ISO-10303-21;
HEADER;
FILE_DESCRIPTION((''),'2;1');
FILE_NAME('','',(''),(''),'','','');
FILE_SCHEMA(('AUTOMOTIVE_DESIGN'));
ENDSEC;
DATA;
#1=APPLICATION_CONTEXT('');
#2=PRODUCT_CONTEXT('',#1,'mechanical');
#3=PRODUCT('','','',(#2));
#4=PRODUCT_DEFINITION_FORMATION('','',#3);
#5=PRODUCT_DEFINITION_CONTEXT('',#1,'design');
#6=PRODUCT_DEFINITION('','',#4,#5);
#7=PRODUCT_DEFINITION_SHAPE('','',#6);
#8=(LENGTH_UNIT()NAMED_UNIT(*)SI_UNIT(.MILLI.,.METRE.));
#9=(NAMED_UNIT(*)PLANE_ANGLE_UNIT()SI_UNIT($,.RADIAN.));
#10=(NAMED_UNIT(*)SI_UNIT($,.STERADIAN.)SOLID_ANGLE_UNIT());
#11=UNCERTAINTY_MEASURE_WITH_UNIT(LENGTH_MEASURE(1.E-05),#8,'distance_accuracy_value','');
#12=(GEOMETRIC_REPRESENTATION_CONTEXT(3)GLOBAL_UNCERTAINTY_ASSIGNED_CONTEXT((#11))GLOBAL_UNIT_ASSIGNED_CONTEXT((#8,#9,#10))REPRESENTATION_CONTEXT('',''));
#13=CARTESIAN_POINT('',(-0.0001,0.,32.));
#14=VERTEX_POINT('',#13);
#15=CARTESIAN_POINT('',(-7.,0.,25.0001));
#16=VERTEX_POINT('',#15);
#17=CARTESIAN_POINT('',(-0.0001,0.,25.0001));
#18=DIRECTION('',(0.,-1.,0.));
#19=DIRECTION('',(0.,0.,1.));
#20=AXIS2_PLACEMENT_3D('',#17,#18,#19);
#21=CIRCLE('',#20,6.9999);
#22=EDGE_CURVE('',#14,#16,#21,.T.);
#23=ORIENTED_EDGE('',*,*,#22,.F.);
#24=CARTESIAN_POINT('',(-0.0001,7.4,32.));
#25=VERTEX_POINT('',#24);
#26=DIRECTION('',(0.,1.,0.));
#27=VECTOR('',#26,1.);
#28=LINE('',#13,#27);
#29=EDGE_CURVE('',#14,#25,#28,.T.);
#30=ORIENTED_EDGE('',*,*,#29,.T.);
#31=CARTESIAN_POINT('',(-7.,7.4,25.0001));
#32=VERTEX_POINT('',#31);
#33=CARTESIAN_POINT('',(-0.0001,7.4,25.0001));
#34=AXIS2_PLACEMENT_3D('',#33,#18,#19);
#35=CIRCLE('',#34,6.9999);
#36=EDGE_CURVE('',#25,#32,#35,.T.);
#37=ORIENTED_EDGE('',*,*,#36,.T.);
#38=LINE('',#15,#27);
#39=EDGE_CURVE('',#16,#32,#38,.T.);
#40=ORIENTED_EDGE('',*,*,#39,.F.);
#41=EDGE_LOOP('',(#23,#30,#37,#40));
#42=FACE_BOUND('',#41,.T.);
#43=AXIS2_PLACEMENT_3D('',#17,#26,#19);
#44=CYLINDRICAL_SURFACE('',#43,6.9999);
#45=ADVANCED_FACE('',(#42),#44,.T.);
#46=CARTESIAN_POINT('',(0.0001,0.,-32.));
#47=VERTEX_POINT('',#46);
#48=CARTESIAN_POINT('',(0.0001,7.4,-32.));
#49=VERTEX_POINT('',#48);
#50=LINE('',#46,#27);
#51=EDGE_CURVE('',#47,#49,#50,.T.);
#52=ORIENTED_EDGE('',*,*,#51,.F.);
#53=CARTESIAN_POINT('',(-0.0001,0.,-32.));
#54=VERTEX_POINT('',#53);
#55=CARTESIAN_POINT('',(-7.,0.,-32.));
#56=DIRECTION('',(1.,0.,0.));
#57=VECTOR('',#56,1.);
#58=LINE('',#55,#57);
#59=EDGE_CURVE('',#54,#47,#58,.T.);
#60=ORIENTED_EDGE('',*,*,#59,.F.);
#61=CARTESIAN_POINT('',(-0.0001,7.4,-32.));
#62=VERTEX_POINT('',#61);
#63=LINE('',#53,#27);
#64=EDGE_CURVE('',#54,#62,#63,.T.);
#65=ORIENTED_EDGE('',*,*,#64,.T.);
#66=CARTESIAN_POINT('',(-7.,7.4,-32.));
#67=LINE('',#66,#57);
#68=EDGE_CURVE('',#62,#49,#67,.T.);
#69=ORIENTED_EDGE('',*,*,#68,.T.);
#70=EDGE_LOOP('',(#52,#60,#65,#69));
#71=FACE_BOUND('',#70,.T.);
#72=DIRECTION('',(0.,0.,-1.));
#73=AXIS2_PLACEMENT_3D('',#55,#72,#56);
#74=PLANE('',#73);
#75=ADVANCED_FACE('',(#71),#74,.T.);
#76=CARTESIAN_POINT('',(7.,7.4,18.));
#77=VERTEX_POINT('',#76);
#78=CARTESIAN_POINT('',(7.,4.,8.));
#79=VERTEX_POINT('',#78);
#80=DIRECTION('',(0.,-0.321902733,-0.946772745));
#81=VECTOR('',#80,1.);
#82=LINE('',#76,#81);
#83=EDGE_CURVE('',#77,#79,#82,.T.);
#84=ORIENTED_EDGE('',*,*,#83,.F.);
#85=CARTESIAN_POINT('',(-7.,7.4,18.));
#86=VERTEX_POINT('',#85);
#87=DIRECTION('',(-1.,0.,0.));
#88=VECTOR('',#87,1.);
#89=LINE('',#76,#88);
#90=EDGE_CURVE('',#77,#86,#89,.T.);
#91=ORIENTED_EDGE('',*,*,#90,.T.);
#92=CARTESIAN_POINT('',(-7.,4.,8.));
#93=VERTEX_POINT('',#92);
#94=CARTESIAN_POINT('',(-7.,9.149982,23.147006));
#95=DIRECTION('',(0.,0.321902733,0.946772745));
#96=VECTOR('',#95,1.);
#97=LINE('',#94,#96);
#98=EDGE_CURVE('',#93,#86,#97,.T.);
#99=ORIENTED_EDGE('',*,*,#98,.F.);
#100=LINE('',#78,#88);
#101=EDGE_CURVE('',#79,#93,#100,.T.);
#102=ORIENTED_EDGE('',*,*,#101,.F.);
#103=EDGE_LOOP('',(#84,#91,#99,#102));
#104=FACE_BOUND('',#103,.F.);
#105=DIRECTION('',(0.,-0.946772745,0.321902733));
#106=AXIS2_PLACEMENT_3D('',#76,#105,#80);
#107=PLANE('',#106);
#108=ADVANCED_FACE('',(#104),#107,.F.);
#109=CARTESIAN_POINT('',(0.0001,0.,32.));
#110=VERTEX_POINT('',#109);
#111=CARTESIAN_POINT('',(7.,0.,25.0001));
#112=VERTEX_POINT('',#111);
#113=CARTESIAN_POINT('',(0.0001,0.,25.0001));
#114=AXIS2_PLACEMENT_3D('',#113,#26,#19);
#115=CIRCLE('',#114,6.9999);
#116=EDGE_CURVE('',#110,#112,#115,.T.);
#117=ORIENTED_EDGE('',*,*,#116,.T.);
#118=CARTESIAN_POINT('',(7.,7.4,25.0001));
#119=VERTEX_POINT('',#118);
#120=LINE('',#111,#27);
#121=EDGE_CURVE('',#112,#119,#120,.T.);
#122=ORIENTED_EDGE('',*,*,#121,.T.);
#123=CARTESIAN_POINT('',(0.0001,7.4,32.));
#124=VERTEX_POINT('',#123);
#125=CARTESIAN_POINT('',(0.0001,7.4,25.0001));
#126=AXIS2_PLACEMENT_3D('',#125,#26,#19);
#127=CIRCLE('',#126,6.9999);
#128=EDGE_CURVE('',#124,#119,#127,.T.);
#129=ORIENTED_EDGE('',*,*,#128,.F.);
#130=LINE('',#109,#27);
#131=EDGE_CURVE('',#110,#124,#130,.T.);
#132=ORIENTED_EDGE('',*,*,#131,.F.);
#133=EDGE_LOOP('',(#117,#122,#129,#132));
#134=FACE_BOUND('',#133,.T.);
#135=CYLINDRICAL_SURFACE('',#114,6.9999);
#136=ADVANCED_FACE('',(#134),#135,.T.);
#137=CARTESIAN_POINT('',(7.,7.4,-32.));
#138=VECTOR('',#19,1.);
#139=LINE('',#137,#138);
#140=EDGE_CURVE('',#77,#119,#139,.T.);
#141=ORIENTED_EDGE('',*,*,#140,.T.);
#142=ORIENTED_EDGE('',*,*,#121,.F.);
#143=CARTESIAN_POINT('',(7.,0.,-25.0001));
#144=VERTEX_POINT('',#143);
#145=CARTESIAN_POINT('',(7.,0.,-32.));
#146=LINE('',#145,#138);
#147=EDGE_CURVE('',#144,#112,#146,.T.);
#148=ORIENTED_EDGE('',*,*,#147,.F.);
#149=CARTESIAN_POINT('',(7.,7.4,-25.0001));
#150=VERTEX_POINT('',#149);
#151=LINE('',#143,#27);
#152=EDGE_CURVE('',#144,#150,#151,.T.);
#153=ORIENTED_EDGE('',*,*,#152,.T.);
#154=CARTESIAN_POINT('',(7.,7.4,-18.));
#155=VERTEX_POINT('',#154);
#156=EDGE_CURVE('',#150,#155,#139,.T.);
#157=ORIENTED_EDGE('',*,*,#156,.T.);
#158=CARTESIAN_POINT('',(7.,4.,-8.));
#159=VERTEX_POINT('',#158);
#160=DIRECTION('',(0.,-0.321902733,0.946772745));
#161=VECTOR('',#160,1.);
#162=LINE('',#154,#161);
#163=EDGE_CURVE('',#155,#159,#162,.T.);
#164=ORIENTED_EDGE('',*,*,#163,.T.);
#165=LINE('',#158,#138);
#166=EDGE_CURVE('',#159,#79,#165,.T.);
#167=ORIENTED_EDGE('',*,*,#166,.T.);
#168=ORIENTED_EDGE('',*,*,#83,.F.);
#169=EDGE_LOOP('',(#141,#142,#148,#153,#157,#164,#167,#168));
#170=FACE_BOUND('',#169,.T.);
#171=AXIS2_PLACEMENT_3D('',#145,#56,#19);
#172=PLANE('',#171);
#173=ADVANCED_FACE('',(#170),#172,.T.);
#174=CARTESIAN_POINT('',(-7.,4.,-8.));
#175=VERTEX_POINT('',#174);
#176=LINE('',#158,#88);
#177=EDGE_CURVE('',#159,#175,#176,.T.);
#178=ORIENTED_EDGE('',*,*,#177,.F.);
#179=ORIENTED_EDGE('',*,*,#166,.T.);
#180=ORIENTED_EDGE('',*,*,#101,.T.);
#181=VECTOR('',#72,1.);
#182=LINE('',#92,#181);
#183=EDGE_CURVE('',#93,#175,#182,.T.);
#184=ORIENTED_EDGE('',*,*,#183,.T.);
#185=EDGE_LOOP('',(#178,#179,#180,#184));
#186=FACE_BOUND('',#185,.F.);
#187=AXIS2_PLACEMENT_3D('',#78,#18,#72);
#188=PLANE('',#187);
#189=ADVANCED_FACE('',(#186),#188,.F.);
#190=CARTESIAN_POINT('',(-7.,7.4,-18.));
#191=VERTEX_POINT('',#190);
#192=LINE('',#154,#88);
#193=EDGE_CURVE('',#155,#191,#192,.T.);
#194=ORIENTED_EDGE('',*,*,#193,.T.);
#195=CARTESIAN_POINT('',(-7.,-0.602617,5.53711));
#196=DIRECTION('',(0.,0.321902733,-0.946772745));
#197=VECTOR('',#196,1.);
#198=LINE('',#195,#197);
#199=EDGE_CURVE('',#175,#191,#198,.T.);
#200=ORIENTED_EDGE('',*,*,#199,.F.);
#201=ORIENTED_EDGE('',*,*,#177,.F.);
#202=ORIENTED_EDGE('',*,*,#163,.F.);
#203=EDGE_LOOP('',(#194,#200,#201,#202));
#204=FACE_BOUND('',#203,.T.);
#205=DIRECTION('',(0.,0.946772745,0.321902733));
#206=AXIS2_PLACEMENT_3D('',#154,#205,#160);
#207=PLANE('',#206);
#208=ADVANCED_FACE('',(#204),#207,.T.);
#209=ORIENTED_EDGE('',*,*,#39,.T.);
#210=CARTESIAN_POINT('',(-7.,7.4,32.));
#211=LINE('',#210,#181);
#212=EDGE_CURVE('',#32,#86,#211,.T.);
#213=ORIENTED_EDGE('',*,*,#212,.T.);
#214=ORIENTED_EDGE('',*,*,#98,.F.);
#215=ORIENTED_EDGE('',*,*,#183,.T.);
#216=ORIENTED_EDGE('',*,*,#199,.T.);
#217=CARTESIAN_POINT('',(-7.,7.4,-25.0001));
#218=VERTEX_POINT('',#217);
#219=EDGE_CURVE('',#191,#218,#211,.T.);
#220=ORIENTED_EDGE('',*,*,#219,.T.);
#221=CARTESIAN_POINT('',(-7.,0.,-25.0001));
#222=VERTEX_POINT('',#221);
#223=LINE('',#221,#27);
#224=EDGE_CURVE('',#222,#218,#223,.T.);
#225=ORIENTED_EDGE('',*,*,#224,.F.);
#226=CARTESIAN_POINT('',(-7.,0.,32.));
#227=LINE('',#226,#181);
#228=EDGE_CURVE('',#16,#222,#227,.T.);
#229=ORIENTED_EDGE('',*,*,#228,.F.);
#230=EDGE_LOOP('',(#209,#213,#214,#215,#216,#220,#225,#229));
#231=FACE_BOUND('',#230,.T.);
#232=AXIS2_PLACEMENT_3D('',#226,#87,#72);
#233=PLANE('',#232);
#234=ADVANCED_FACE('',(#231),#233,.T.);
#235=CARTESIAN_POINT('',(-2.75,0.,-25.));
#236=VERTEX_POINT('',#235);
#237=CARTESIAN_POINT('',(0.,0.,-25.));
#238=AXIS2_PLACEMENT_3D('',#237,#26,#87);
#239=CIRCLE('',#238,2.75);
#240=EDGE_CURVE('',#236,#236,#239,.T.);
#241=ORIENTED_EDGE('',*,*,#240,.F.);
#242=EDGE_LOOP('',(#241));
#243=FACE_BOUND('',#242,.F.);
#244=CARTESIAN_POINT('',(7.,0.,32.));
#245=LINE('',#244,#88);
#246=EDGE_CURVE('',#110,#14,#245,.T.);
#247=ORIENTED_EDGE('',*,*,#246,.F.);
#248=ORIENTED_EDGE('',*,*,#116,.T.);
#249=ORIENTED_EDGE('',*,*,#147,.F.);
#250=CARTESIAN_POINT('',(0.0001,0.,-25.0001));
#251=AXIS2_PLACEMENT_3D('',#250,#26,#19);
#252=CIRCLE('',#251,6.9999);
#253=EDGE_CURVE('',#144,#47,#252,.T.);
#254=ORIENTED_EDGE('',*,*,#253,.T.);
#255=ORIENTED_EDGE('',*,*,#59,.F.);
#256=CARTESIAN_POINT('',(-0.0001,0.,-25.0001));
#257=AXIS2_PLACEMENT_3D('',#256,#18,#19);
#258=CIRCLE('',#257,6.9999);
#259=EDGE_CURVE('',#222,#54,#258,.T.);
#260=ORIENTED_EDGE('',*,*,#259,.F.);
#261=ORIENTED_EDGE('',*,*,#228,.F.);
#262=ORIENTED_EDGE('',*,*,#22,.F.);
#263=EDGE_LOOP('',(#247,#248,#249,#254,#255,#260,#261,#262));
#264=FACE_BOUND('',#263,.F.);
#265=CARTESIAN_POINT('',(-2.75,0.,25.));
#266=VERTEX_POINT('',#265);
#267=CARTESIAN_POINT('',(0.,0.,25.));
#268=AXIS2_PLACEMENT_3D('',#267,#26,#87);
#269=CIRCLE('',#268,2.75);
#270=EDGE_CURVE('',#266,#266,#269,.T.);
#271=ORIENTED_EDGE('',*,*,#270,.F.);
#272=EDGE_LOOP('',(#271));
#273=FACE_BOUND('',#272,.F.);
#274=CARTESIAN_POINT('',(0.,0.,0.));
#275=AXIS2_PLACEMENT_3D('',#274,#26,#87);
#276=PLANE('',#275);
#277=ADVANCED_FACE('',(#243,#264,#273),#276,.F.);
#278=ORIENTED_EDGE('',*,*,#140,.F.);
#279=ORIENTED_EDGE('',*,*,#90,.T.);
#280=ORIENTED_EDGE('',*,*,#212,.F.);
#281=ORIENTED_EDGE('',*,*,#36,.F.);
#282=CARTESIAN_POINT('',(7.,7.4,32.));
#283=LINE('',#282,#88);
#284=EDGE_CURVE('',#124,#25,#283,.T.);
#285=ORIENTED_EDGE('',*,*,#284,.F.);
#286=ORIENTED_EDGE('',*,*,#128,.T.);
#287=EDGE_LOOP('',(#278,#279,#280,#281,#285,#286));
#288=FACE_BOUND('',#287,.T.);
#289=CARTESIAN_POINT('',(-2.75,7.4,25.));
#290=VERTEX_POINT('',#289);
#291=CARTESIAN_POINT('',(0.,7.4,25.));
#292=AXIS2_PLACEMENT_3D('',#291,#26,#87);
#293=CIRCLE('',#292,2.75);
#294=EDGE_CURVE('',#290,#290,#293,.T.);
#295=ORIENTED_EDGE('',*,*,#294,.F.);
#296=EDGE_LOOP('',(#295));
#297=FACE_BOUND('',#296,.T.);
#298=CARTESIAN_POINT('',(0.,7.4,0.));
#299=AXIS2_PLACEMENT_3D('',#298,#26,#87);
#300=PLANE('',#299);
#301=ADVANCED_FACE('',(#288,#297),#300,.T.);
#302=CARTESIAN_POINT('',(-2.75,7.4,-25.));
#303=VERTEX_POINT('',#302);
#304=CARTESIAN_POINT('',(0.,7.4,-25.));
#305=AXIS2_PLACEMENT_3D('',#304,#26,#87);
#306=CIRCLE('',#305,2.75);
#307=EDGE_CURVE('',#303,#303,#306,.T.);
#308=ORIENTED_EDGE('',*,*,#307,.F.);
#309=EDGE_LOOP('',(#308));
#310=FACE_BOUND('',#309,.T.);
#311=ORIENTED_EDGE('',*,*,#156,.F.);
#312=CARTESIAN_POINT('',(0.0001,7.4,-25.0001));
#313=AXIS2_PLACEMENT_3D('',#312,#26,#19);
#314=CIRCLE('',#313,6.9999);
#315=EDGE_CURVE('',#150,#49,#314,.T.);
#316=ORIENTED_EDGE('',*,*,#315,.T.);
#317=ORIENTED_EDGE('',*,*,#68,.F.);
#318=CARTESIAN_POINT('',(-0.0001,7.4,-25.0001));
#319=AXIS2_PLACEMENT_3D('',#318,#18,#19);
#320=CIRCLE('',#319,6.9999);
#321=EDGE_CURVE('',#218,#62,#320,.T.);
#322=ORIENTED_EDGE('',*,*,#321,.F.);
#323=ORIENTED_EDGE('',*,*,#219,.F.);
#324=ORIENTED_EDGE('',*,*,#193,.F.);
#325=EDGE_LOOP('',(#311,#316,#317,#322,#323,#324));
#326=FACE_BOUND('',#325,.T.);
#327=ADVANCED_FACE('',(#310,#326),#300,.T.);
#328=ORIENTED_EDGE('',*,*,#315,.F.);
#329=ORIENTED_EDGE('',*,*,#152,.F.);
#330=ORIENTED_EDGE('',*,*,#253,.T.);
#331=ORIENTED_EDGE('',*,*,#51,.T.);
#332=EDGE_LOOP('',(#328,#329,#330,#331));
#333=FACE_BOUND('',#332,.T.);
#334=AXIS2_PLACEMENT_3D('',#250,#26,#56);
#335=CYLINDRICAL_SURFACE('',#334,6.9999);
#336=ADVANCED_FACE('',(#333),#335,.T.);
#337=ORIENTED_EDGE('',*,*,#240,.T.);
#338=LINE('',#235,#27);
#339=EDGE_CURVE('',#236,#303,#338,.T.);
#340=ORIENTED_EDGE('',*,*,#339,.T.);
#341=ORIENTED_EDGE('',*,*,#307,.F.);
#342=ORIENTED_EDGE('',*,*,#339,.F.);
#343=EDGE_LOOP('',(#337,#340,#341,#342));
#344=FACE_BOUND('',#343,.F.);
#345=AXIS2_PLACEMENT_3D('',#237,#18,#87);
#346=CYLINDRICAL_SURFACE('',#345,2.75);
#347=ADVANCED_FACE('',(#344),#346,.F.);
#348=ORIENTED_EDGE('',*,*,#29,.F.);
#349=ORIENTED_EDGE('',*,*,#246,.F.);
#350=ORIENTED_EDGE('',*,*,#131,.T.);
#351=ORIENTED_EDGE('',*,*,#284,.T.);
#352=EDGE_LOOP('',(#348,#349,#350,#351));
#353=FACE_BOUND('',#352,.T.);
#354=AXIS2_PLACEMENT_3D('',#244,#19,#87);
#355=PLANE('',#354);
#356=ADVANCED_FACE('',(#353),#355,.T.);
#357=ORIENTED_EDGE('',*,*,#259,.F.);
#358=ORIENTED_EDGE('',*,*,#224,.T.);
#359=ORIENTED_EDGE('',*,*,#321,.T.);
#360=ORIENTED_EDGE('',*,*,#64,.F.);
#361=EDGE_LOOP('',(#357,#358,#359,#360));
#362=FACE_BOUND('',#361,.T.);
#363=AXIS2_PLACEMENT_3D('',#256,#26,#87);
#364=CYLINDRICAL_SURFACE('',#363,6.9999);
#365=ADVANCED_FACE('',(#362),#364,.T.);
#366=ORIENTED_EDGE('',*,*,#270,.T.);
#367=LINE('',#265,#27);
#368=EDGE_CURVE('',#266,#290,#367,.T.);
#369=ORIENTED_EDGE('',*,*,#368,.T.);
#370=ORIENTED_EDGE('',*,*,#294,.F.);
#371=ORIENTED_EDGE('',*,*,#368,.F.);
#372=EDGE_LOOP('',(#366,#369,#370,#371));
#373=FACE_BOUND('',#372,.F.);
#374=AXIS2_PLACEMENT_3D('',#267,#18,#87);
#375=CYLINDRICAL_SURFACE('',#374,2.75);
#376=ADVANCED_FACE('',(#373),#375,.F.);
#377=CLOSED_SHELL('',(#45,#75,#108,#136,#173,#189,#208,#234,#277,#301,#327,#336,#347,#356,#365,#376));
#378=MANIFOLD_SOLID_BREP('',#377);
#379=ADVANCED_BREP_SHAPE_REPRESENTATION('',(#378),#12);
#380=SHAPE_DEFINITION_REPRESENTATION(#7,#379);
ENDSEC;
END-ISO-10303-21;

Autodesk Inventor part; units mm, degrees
ref_plane "YZ Plane" through (0, 0, 0) normal (1, 0, 0) x (0, 1, 0)
ref_plane "XZ Plane" through (0, 0, 0) normal (0, 1, 0) x (-1, 0, 0)
ref_plane "XY Plane" through (0, 0, 0) normal (0, 0, 1) x (1, 0, 0)
sketch "Sketch1" plane through (0, 0, 0) normal (0, 1, 0) x (-1, 0, 0)
  line L0 (-7, 32) -> (7, 32)
  line L1 (7, 32) -> (7, -32)
  line L2 (7, -32) -> (-7, -32)
  line L3 (-7, -32) -> (-7, 32)
  line L4 (-7, 32) -> (7, -32) construction
  line L5 (7, 32) -> (-7, -32) construction
  circle A0 centre (0, 25) radius 2.75
  circle A1 centre (0, -25) radius 2.75
  line L6 (0, 25) -> (0, 0) construction
  line L7 (0, 0) -> (0, -25) construction
  dimension "d0" = 5.5
  dimension "d1" = 50
  dimension "d3" = 7
  dimension "d4" = 7
extrude "Extrusion1" add sketch "Sketch1" along normal blind 7.4
sketch "Sketch2" plane through (7, 0, 32) normal (1, 0, 0) x (0, 0, -1)
  line L0 (64, 7.4) -> (0, 7.4) construction
  line L1 (14, 7.4) -> (24, 4)
  line L2 (24, 4) -> (32, 4)
  line L3 (32, 4) -> (32, 0) construction
  line L4 (50, 7.4) -> (40, 4)
  line L5 (40, 4) -> (32, 4)
  line L6 (14, 7.4) -> (50, 7.4)
  line L7 (0, 0) -> (64, 0) projected
  line L8 (4.25, 7.4) -> (9.75, 7.4) projected
  point P0 (7, 7.4)
  dimension "d7" = 4
  dimension "d8" = 7
  dimension "d9" = 10
extrude "Extrusion2" cut sketch "Sketch2" against normal through all
fillet "Fillet1" radius 7 4 edges at (7, 3.7, 32) (-7, 3.7, 32) (-7, 3.7, -32) (7, 3.7, -32)
properties part number "CH_01_0052_bracket_mount"
